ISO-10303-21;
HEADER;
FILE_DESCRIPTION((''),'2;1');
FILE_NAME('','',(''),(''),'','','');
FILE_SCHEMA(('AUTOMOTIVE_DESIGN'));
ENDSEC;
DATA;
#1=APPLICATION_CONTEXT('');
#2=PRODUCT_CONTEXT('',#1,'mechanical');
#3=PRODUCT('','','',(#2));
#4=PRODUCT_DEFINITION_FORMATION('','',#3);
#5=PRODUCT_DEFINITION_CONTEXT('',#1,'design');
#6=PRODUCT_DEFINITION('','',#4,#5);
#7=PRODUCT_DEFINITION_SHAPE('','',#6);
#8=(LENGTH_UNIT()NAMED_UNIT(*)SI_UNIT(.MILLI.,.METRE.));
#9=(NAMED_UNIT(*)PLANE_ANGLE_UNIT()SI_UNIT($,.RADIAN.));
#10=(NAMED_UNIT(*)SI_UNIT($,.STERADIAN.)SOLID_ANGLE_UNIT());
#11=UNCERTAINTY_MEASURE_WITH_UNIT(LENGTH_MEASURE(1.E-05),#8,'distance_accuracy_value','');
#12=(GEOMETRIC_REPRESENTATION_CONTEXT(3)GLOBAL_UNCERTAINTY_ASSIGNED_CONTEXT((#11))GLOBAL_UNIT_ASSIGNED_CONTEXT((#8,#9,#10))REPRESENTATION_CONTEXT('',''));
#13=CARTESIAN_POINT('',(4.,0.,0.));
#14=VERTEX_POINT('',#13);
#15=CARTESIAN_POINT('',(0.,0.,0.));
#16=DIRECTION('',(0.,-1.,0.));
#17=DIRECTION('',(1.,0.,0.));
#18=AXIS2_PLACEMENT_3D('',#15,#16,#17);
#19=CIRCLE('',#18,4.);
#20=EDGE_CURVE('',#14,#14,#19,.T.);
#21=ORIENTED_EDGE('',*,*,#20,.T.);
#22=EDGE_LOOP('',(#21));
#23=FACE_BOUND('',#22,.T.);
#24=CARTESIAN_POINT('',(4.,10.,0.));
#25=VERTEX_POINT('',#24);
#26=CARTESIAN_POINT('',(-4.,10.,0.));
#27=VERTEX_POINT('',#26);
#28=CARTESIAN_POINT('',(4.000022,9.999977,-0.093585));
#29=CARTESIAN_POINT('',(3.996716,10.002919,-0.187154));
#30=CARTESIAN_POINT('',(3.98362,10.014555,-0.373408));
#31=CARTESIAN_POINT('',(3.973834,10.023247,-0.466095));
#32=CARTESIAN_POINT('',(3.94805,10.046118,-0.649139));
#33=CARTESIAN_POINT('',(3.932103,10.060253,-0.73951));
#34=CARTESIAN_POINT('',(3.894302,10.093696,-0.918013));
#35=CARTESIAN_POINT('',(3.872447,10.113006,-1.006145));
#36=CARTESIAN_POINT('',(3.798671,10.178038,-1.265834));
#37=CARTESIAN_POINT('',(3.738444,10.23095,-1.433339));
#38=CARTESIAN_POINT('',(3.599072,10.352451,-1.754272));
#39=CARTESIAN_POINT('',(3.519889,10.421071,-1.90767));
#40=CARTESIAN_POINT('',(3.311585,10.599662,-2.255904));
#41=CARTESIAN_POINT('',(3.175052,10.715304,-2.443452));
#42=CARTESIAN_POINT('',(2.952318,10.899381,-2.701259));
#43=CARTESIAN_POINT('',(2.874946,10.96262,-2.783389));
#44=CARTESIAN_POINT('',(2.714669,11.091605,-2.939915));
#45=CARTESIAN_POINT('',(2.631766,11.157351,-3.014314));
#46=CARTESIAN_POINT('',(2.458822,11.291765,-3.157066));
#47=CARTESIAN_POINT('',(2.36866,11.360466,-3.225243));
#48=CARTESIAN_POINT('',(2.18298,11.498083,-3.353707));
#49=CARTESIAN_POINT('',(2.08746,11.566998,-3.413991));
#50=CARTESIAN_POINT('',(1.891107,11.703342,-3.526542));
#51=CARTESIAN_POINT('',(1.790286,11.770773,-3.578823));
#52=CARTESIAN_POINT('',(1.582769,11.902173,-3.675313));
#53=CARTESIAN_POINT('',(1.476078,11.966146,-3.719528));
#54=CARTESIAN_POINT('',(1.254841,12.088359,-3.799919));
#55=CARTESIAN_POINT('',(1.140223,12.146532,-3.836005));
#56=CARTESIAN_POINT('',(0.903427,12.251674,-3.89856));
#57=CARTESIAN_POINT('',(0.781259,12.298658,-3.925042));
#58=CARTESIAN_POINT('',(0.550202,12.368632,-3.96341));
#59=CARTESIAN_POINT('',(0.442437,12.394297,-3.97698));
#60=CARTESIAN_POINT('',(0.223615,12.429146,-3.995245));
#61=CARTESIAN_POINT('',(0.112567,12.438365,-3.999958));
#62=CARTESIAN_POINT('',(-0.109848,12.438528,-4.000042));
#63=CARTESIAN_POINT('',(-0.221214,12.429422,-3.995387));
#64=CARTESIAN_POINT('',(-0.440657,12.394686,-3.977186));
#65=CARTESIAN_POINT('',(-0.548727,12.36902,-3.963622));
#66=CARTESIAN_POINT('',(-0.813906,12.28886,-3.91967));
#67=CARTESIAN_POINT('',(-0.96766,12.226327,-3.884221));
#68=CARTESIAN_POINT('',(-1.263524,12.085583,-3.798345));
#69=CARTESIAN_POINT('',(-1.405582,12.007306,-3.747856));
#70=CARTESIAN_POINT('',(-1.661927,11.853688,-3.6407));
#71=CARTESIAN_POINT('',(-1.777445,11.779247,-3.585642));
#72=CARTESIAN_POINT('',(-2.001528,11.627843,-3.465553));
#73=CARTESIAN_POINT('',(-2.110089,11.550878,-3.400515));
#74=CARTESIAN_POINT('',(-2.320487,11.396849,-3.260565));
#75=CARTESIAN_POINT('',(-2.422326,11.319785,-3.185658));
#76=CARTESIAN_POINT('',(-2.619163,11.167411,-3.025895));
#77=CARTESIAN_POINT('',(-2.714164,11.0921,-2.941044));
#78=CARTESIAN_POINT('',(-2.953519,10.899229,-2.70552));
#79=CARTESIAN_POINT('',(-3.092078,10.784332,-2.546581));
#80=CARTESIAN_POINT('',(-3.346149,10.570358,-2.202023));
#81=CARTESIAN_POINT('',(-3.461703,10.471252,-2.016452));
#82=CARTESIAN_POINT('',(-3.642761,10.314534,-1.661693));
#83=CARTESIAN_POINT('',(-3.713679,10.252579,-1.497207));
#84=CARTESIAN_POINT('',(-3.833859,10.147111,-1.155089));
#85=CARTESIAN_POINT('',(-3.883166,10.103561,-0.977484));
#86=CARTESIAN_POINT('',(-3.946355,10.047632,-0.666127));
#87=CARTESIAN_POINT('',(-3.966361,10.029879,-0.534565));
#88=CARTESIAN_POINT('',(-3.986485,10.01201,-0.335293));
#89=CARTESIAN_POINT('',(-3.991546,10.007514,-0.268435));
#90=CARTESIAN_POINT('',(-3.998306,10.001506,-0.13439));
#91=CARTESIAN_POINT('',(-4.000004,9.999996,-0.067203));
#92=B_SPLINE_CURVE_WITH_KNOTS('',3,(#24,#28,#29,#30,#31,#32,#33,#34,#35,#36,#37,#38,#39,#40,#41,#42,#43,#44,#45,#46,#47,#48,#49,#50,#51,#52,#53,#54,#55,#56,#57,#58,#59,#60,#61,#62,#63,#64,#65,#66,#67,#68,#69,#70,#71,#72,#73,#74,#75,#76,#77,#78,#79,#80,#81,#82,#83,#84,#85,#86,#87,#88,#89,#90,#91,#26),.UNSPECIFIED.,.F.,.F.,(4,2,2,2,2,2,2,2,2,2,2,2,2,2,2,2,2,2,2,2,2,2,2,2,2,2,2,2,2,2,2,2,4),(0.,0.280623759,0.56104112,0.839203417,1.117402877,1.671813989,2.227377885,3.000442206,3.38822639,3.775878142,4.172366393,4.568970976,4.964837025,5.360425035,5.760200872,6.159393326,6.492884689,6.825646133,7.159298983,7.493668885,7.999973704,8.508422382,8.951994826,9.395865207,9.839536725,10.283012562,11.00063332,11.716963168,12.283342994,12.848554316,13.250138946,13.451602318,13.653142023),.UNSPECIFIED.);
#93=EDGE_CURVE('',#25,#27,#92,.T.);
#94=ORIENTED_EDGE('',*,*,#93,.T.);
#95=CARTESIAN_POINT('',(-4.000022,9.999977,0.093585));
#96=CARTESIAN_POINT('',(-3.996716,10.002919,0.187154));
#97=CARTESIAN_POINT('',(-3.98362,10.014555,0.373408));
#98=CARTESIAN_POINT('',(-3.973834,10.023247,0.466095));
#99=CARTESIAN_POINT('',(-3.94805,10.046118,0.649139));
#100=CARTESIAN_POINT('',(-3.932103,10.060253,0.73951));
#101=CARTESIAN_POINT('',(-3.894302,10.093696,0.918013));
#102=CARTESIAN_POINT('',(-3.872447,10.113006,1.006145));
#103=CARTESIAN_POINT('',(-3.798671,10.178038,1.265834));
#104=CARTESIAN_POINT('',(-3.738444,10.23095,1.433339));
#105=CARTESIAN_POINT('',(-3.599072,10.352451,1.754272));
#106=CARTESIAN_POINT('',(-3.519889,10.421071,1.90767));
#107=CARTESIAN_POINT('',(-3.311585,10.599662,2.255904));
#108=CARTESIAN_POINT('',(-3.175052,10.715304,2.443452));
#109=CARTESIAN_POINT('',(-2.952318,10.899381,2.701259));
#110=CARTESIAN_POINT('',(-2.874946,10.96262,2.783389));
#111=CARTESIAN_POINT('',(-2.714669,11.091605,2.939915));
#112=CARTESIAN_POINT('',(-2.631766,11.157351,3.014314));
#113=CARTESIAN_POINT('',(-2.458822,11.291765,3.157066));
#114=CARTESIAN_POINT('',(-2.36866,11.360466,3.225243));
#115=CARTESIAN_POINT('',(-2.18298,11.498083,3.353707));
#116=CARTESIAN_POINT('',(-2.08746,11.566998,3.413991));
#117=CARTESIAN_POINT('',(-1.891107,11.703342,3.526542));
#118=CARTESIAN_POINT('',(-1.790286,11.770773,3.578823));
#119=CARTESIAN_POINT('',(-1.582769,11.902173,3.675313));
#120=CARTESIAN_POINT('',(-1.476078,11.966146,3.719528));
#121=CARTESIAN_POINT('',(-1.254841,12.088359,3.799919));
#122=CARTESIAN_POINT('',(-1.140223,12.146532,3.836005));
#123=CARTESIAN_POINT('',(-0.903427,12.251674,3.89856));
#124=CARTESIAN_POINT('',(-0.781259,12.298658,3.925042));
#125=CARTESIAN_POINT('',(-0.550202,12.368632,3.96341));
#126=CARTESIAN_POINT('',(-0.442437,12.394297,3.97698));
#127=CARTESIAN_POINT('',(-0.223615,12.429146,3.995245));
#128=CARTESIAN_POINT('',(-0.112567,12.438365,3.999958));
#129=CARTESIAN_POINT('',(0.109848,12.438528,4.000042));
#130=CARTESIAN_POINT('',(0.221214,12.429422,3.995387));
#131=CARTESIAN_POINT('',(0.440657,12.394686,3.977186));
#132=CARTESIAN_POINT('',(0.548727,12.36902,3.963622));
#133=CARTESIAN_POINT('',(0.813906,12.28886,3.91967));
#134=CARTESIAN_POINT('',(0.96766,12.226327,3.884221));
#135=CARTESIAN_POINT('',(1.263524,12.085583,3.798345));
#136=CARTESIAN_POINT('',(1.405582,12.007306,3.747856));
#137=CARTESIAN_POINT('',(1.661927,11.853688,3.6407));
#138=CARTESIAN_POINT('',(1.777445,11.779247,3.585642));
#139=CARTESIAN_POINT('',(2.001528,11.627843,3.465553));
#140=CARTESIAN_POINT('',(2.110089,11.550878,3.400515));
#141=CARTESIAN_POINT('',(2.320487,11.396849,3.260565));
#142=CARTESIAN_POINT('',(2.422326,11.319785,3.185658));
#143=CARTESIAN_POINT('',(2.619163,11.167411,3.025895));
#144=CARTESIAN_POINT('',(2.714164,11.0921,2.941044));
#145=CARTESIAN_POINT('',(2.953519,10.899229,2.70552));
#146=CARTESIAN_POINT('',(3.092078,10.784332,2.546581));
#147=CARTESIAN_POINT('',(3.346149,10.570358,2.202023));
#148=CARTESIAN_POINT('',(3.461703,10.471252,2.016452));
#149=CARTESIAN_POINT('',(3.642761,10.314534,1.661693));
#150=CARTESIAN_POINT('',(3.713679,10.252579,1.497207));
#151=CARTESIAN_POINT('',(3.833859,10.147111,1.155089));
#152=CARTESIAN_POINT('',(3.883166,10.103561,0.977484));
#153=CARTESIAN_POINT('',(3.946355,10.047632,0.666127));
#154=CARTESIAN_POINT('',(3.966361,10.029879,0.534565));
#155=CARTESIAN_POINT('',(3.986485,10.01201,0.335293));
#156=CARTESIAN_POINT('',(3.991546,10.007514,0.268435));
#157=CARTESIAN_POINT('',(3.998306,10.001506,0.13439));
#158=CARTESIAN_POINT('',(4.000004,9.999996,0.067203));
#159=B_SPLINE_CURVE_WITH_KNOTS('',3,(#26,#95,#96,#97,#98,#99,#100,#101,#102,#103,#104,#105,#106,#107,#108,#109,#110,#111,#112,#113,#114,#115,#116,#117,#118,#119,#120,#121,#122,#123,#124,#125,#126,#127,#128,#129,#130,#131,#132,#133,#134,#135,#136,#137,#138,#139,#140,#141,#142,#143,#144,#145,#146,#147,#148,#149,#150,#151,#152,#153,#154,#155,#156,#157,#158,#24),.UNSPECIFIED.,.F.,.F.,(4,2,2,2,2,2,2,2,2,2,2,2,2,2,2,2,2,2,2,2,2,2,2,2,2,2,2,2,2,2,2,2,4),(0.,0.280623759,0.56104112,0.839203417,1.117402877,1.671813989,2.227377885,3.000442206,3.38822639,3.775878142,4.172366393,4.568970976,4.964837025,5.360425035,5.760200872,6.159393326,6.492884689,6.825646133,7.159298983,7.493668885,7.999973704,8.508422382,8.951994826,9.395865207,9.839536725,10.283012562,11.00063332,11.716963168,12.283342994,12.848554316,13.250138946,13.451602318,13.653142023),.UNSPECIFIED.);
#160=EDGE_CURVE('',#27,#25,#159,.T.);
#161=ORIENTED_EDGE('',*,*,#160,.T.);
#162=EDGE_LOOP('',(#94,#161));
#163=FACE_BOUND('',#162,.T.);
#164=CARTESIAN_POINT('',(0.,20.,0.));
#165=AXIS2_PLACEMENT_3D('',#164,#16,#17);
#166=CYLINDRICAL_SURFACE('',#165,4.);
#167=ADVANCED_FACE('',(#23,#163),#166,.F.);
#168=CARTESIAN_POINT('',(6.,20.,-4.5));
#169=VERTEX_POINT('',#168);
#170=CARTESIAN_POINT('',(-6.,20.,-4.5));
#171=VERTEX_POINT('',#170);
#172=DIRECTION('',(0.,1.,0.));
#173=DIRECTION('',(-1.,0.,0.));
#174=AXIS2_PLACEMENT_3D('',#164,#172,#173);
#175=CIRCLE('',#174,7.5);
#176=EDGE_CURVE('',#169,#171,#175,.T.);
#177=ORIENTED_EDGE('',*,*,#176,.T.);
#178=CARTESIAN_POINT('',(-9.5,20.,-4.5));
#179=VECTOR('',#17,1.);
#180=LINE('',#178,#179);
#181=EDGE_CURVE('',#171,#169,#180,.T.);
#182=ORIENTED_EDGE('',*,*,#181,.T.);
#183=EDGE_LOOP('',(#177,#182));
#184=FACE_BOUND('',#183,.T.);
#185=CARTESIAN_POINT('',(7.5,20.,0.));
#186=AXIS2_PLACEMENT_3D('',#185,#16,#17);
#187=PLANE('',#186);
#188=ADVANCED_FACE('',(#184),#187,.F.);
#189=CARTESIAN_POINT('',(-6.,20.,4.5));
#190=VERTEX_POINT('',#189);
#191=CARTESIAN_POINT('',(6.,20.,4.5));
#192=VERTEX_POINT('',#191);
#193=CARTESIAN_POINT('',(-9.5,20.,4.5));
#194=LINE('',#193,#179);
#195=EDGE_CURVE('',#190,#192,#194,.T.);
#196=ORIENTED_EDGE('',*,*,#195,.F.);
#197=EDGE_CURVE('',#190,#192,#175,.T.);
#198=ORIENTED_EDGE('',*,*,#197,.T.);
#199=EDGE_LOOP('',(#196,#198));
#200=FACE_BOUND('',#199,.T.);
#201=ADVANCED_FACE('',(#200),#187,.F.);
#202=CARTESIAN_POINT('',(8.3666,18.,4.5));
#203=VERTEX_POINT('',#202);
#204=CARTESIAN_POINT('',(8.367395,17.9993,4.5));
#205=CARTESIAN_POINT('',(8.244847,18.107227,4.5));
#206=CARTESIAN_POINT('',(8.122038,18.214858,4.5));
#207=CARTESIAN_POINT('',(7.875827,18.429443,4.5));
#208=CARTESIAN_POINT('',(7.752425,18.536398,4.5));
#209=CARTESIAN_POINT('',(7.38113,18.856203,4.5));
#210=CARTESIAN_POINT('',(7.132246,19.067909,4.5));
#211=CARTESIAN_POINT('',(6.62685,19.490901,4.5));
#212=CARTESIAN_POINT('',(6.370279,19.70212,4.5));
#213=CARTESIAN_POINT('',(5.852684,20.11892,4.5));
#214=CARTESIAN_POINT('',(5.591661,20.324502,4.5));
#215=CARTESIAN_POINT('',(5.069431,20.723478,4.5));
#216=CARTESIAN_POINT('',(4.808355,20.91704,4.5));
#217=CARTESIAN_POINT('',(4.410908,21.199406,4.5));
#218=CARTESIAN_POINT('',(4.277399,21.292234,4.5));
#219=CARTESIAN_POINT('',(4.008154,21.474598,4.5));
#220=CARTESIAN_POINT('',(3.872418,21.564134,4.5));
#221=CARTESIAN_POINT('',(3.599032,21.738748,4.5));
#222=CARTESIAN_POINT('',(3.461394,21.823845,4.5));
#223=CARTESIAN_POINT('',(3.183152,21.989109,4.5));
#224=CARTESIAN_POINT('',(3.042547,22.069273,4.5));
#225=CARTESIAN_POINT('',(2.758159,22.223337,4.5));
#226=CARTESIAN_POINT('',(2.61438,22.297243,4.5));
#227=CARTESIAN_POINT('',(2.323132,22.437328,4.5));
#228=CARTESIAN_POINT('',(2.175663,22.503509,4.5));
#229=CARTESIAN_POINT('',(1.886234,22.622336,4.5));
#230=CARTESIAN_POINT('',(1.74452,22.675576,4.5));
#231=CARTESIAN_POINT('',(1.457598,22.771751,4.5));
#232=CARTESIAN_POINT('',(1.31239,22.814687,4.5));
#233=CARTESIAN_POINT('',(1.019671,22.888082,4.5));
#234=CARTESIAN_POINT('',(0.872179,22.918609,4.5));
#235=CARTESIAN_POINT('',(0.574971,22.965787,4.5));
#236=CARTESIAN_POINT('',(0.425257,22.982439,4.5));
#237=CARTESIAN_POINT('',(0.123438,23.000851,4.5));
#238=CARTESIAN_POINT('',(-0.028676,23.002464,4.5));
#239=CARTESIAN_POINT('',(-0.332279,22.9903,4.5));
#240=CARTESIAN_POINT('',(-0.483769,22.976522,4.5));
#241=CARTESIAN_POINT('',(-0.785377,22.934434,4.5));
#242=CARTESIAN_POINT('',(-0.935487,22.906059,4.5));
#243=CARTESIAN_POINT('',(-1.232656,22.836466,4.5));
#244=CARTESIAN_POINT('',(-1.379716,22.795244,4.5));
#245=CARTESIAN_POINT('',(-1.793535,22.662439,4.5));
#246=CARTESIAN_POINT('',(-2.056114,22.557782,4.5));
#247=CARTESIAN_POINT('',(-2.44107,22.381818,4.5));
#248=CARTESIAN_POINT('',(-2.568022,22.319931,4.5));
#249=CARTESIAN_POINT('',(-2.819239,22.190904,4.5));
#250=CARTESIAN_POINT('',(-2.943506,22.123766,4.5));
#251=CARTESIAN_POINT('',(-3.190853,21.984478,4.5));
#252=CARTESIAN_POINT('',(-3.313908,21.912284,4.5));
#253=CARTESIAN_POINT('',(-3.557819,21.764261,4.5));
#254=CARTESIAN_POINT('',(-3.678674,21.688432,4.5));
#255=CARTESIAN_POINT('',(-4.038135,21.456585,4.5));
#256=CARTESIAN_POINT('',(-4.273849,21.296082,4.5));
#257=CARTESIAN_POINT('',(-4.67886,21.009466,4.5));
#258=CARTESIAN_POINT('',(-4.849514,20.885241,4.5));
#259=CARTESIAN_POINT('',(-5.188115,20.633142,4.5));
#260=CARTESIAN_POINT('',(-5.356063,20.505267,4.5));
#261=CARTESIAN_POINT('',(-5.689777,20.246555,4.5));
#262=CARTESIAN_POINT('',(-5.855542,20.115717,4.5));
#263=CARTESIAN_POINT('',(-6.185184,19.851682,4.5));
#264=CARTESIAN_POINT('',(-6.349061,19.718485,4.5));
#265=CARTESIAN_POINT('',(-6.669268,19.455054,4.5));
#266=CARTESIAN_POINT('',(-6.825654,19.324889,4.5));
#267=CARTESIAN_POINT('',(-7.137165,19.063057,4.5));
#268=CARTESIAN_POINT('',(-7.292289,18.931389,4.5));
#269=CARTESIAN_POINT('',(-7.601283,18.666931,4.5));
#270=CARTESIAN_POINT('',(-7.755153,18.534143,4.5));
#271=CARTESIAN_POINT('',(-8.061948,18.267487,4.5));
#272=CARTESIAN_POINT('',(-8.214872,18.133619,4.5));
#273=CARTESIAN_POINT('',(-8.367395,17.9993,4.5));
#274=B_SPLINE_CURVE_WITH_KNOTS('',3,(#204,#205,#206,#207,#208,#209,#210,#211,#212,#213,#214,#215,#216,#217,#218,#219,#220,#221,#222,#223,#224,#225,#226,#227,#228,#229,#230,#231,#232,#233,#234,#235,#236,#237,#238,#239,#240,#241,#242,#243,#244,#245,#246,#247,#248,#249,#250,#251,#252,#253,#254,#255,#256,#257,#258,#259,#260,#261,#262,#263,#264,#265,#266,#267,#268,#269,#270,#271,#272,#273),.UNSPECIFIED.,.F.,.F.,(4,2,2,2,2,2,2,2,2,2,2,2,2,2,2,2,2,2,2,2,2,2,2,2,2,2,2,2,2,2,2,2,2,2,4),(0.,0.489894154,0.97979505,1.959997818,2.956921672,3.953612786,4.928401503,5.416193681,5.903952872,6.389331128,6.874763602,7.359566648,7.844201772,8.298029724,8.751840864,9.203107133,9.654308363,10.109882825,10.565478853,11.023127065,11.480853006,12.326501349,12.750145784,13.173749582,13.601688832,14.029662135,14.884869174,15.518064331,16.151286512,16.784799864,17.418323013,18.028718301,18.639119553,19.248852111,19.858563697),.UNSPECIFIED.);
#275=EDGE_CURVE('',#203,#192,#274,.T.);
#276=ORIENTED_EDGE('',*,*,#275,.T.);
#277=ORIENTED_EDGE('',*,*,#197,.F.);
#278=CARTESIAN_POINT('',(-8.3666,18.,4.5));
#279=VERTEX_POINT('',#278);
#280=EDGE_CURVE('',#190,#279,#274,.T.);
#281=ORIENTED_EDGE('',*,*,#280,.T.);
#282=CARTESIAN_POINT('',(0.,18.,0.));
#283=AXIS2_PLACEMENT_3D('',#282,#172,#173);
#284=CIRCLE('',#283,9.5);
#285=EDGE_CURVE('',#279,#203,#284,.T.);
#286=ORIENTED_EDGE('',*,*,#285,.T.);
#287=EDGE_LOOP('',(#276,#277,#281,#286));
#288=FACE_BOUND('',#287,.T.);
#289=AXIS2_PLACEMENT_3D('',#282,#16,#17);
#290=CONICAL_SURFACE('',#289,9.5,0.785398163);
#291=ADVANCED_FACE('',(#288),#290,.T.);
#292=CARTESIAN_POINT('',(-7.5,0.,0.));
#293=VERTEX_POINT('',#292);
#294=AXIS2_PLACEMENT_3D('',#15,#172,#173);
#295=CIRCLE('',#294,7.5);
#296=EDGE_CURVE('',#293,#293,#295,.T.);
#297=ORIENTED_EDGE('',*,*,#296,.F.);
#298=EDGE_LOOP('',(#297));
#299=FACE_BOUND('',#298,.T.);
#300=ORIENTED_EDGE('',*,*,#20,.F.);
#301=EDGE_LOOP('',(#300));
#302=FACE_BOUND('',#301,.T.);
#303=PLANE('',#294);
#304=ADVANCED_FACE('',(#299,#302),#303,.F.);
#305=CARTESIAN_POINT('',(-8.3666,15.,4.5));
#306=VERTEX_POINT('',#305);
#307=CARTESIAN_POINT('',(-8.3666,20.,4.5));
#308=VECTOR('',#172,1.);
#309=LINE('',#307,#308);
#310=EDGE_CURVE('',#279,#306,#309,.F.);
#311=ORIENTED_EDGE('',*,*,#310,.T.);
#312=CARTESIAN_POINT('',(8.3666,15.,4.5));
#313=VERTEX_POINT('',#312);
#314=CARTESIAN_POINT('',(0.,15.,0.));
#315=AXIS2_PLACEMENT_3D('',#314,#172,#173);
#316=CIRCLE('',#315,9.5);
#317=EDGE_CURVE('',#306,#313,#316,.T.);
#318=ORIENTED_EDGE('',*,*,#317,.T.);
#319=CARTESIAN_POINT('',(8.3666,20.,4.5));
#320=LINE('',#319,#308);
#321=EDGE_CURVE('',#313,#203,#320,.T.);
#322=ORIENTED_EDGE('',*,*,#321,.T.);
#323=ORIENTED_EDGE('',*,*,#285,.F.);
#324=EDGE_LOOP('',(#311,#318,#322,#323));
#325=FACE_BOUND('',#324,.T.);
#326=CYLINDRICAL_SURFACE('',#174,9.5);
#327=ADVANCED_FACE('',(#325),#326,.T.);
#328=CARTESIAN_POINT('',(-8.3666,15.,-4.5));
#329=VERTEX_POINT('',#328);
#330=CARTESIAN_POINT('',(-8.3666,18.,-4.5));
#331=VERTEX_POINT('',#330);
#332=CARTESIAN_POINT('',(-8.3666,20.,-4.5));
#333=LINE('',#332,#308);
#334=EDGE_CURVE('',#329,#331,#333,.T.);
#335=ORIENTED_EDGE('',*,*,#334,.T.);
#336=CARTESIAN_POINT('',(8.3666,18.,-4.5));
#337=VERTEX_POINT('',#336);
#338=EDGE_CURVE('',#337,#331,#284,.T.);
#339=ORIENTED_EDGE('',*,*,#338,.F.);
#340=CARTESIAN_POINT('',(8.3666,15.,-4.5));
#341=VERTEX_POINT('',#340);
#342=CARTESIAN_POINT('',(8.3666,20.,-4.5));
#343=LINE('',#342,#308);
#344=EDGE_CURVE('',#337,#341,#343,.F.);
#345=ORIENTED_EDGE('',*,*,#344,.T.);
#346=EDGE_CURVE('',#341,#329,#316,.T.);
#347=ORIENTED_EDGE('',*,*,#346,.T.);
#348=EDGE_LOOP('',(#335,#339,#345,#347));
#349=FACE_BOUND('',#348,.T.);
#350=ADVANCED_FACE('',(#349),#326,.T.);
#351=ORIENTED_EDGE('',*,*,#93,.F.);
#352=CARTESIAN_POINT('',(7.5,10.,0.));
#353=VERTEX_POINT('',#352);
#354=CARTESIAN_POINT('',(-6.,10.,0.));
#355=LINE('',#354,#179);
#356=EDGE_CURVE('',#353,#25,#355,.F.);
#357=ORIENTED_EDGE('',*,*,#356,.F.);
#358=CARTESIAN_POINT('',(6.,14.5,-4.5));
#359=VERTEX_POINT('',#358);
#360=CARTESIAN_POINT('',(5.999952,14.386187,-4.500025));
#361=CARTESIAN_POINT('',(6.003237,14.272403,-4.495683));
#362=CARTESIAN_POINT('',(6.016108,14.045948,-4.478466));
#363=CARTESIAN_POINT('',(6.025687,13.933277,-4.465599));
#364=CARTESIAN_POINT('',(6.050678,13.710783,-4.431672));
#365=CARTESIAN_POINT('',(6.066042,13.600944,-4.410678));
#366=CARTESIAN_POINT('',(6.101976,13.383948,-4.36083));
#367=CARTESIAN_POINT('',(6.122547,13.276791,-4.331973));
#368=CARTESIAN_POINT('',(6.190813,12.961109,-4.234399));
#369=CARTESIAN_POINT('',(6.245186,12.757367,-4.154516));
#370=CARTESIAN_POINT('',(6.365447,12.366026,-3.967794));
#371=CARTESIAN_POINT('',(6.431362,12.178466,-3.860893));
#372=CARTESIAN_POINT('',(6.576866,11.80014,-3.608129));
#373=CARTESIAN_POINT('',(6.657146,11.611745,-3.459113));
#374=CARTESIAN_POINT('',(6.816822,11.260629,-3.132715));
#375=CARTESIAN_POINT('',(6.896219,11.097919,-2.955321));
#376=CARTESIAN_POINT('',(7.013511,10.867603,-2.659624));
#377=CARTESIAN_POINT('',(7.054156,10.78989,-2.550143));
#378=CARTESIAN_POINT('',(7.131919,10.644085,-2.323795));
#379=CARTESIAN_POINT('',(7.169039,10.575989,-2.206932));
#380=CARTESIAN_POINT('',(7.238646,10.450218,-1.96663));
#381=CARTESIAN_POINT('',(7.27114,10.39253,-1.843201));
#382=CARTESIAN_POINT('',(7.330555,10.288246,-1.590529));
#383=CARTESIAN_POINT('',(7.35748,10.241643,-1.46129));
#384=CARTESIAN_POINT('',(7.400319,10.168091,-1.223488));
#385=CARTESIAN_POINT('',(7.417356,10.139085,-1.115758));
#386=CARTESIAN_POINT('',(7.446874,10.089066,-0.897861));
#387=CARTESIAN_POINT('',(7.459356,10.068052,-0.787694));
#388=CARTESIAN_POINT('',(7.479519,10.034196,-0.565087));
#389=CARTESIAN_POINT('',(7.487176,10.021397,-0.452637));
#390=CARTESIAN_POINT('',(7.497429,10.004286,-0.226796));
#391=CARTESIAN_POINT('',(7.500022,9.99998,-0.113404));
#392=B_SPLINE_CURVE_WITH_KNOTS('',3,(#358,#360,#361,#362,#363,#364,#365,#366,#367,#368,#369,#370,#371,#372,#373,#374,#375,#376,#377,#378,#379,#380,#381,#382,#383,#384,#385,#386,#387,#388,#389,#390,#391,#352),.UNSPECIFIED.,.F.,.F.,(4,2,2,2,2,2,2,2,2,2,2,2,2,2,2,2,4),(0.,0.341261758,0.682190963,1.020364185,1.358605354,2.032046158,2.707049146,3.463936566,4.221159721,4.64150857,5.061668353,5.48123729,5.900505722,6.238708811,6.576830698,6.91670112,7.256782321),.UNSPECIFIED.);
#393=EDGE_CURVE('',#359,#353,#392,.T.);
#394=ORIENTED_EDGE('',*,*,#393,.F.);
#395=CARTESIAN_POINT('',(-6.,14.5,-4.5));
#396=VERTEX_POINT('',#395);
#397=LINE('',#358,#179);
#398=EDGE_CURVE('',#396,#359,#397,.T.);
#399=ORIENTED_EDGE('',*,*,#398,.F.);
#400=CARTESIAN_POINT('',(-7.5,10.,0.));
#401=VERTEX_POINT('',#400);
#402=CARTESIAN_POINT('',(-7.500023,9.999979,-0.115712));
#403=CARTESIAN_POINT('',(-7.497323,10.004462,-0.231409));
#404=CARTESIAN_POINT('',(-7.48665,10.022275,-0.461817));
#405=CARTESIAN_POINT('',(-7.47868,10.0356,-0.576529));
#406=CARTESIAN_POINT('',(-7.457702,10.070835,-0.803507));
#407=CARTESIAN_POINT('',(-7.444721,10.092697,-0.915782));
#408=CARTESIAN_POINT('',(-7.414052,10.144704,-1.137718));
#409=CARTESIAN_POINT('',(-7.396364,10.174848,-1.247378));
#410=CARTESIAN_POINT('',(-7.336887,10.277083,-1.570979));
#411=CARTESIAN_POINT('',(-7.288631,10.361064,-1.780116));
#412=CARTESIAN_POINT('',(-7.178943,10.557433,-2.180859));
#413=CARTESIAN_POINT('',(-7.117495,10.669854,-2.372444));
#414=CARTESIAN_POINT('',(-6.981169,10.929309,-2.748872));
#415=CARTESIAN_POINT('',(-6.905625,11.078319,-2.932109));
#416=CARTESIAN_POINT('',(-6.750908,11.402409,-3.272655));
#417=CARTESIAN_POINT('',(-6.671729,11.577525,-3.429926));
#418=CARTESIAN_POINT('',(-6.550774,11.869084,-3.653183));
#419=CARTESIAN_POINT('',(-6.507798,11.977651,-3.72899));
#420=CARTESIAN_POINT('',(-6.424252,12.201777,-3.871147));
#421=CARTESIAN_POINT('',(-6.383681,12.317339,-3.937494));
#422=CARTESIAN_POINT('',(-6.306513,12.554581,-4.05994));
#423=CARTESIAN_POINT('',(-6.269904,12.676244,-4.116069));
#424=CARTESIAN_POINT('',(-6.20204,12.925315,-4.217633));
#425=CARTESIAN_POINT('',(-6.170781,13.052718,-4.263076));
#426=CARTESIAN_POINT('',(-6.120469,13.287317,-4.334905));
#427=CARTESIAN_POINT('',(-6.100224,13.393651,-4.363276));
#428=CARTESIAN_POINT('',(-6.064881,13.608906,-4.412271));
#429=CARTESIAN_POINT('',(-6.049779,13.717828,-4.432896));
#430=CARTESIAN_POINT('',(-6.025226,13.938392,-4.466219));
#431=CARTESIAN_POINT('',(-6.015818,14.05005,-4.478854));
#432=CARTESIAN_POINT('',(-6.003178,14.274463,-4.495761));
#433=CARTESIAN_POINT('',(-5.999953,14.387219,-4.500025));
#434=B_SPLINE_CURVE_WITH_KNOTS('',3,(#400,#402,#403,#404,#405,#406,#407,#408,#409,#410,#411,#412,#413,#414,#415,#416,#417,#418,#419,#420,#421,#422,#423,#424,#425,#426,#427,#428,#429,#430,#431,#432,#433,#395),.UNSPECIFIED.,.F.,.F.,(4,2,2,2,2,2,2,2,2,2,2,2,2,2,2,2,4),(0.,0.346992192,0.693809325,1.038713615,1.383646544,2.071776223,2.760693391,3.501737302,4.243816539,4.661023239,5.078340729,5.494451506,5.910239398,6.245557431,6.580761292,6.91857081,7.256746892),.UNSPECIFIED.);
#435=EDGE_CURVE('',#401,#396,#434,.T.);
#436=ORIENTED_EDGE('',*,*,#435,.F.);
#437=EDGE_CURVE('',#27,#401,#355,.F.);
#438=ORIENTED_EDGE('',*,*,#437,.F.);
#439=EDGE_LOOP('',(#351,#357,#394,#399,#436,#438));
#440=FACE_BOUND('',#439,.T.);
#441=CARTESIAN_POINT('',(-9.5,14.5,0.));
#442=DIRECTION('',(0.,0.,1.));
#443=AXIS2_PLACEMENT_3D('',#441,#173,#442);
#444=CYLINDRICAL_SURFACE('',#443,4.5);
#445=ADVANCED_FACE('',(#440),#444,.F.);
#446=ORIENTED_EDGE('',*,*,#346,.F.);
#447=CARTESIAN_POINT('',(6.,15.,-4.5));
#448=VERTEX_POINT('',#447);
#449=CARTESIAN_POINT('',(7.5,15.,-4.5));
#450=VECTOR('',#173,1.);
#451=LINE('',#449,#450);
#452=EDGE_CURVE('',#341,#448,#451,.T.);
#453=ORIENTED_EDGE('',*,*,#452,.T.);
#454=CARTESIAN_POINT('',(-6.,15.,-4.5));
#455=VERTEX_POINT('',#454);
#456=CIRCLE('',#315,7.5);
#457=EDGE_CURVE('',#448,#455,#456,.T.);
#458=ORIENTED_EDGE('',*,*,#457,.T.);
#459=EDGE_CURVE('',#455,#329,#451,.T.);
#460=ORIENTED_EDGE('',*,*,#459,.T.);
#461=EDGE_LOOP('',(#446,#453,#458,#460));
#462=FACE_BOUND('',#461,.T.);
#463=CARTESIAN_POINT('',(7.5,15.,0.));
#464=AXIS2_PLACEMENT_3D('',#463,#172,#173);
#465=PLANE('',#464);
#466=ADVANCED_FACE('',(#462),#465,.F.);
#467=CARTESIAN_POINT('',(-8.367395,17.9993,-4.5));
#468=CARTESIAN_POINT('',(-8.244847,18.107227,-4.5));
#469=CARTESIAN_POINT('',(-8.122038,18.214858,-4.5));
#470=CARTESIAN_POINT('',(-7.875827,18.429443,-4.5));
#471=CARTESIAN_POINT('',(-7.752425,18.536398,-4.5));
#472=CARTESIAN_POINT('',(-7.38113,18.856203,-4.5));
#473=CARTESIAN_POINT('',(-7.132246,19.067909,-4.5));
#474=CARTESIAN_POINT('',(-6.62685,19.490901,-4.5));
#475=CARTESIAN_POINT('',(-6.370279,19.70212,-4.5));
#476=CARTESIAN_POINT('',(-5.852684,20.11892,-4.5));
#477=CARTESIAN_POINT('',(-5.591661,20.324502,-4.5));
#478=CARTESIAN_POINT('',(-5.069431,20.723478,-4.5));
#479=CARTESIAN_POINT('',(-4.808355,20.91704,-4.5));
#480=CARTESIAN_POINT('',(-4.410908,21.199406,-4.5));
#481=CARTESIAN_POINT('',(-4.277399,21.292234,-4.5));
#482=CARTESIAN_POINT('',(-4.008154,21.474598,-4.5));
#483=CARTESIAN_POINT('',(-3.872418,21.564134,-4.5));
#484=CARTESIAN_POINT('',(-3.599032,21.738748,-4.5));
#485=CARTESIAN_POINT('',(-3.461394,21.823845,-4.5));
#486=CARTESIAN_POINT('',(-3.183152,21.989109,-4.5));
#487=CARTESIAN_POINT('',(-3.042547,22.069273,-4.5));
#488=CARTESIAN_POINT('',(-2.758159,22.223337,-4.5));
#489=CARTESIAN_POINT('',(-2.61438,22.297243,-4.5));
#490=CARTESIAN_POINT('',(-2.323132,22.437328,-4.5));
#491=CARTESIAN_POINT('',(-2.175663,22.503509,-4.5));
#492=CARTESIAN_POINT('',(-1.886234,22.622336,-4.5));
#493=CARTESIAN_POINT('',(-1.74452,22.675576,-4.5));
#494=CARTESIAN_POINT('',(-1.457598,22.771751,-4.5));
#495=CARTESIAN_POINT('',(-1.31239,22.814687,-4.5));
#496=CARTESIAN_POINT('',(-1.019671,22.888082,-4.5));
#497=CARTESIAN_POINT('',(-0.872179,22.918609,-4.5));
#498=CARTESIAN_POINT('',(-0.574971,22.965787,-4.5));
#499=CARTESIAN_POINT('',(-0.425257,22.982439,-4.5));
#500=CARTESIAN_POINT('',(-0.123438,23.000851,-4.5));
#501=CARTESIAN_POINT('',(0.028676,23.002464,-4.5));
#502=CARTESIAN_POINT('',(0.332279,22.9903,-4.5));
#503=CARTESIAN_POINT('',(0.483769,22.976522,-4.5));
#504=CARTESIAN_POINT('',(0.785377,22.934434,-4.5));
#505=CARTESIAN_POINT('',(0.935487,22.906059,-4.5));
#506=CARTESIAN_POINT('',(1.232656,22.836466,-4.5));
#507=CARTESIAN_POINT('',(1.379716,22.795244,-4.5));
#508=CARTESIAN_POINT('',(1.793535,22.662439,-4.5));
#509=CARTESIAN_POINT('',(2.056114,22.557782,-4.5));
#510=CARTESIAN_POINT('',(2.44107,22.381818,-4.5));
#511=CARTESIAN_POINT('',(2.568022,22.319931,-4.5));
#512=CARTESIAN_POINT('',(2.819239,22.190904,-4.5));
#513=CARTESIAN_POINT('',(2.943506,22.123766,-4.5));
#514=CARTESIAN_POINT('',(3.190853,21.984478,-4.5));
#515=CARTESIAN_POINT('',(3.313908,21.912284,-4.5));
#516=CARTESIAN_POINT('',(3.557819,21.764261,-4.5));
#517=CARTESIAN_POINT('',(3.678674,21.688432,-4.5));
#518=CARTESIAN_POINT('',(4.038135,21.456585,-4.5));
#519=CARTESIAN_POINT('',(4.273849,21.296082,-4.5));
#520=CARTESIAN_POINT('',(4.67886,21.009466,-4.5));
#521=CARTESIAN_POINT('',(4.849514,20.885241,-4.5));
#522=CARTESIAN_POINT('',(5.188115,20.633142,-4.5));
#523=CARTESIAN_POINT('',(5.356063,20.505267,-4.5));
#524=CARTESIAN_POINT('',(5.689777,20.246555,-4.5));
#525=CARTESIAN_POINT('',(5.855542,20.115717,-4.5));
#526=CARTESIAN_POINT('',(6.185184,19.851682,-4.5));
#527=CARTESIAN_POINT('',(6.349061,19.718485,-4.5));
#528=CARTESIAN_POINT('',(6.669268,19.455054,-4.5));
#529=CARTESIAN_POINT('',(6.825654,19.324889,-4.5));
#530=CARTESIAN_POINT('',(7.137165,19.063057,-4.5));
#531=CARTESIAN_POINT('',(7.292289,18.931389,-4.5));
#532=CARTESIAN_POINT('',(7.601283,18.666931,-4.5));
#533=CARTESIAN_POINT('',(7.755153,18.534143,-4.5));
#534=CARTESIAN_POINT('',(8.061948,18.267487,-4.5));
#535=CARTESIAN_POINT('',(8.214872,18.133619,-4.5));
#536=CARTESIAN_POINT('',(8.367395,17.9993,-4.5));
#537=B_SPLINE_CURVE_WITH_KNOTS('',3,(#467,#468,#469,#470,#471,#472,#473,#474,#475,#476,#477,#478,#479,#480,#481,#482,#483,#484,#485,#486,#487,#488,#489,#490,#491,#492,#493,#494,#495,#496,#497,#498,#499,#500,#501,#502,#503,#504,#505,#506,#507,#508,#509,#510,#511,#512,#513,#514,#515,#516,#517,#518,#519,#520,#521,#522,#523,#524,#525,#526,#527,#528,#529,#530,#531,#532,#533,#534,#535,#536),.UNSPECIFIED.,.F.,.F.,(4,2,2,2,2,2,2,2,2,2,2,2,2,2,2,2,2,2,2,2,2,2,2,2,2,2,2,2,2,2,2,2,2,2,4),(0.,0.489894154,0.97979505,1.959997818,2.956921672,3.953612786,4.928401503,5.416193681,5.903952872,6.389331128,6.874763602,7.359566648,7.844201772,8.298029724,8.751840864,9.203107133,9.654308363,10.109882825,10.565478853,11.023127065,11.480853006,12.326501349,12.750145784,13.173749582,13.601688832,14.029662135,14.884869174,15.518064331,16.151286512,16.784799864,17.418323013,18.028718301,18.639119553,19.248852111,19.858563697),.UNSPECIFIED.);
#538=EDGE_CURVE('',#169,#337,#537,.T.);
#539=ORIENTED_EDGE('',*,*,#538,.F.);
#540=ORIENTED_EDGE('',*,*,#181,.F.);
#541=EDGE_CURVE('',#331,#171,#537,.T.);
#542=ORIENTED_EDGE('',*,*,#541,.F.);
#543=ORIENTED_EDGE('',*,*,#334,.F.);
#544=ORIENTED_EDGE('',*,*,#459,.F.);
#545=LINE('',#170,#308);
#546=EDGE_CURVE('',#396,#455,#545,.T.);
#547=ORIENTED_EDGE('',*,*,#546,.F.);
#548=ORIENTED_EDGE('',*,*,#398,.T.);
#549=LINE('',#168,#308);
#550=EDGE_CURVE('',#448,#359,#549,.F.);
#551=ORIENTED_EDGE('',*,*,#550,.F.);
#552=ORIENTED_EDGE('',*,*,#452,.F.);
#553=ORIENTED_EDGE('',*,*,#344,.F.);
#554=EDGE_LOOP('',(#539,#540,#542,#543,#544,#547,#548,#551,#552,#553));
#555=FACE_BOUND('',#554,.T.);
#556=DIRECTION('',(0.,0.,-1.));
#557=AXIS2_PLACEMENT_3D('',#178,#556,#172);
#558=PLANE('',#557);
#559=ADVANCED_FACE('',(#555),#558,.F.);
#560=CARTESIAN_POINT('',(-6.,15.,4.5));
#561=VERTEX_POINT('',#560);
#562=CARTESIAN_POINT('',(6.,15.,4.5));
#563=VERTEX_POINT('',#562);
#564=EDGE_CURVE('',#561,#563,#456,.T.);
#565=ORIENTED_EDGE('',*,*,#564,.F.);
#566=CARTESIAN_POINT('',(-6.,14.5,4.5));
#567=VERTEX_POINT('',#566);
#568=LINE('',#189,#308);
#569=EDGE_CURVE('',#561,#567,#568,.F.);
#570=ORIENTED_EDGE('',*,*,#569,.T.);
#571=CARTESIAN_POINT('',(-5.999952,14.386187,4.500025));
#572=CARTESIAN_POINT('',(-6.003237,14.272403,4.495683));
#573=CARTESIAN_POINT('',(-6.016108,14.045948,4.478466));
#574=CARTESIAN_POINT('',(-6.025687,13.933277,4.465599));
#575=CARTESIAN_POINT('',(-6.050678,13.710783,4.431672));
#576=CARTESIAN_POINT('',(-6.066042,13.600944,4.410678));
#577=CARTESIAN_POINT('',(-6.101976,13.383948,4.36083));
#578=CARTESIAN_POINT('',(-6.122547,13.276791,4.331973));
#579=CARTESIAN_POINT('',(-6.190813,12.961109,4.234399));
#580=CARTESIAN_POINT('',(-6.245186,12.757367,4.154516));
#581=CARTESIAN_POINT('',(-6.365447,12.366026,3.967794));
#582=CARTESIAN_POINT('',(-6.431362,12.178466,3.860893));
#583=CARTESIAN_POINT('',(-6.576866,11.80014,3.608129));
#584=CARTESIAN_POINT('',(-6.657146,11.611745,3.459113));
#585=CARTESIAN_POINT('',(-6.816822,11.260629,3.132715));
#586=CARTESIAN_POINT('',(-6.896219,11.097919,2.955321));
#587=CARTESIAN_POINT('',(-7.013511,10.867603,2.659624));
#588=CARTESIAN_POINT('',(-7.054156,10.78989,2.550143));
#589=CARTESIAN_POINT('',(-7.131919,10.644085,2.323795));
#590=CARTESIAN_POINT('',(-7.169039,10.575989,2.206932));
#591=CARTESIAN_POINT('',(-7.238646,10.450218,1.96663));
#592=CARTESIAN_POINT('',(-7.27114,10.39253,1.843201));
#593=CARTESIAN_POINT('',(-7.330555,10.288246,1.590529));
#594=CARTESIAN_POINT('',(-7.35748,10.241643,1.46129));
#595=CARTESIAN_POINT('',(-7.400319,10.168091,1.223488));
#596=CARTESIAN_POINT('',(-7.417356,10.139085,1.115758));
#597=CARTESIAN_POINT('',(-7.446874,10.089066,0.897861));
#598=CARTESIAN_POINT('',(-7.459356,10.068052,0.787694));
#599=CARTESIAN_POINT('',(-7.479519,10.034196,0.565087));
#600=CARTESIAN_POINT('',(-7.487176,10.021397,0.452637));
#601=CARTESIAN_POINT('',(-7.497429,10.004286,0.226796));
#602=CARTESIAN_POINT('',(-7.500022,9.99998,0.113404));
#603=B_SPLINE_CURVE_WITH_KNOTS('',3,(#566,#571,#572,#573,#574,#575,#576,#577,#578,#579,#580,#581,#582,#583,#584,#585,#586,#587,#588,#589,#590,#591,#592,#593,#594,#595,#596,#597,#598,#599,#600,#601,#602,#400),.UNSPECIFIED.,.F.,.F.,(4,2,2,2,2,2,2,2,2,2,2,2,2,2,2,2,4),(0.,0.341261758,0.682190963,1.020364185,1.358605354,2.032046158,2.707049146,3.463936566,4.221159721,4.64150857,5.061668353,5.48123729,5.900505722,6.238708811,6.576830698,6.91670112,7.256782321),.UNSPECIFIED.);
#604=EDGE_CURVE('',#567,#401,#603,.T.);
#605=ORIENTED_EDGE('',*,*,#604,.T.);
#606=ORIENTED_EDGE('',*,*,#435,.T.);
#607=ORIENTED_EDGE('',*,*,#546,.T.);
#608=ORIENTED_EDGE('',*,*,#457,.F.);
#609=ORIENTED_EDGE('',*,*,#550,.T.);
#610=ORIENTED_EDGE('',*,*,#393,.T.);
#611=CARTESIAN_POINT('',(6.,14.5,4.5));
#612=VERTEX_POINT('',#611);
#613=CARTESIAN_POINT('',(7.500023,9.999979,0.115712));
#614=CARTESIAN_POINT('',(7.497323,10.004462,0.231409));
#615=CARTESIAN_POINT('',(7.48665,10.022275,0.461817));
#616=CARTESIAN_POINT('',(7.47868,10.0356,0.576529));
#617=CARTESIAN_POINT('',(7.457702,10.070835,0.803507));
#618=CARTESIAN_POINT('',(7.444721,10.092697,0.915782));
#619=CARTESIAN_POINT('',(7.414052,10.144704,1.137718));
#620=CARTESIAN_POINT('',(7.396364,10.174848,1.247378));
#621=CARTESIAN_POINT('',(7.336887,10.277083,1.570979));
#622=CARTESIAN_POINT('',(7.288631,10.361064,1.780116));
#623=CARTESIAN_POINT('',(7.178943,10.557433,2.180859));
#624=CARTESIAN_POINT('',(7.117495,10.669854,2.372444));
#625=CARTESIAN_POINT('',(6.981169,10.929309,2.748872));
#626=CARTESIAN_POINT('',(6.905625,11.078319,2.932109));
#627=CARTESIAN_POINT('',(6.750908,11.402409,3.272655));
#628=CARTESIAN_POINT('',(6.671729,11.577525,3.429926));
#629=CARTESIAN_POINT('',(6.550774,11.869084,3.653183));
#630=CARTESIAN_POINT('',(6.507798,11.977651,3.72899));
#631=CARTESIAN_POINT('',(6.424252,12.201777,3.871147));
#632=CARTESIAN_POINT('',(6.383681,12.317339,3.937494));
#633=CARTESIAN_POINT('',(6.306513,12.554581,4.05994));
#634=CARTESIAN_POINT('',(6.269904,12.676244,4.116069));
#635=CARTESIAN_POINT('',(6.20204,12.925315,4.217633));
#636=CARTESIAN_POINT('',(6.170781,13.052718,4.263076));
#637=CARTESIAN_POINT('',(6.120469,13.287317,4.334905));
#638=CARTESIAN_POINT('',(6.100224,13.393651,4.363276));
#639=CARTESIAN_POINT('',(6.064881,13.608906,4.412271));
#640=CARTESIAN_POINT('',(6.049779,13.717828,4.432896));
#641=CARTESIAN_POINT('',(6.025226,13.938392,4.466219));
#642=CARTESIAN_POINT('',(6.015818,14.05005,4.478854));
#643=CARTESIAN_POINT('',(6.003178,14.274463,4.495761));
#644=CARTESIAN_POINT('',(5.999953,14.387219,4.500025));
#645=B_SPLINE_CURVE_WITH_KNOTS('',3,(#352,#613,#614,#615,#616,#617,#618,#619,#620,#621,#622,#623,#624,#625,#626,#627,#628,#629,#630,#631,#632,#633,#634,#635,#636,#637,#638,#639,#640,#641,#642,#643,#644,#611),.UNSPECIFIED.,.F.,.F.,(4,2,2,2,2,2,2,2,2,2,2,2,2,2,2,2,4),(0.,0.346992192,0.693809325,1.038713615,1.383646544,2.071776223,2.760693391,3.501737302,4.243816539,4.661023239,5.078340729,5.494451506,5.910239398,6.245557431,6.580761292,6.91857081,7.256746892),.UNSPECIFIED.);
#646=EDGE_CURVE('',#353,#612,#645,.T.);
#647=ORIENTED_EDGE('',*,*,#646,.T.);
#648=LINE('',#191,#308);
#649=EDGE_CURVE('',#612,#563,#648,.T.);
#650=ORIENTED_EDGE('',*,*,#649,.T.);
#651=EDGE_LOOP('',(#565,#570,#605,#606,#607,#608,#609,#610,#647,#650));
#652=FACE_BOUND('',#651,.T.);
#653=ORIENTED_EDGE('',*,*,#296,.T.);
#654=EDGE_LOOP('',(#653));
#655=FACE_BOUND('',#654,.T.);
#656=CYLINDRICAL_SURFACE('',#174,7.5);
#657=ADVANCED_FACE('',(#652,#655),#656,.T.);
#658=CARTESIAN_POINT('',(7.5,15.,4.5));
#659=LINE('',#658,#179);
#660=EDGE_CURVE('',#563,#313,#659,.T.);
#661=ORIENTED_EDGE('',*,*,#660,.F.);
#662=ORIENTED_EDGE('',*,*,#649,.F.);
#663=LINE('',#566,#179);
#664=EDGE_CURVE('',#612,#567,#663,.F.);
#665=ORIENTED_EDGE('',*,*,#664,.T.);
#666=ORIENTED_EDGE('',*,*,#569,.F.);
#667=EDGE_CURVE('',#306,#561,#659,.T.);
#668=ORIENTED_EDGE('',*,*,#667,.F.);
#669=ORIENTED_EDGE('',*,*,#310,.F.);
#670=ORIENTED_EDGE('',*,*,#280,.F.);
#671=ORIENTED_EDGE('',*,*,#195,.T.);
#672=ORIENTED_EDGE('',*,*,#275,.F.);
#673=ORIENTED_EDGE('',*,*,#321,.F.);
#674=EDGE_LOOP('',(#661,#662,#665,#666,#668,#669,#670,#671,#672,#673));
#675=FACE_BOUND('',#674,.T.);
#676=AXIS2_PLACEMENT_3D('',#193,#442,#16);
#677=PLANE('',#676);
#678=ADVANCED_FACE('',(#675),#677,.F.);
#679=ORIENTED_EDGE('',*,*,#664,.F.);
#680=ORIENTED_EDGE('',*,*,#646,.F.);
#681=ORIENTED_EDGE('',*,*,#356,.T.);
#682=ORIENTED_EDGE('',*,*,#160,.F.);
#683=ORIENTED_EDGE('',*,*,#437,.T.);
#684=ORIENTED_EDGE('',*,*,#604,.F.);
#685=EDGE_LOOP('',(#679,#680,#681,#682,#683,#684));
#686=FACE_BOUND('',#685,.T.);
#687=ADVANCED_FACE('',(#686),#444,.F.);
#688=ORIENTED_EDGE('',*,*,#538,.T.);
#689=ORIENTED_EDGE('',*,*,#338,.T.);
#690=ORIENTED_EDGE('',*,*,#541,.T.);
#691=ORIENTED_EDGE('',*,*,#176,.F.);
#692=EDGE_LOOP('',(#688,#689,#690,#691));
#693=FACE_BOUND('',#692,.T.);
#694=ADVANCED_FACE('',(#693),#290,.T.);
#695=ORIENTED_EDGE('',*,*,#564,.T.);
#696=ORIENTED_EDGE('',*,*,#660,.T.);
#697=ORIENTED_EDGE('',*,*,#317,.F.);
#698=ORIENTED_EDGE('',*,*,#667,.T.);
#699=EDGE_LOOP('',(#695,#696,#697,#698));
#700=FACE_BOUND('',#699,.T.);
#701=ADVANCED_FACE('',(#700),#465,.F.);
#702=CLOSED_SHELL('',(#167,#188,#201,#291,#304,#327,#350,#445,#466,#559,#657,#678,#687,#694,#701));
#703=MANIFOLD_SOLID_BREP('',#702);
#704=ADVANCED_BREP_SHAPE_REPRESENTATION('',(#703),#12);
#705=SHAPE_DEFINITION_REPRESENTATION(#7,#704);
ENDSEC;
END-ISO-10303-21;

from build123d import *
from build123d.topology import SkipClean

# Parameters (mm, degrees)
SKETCH2_R               = 4
CUT_EXTRUDE1_DEPTH      = 25.093567606
CUT_EXTRUDE2_DEPTH      = 25.093567606
CUT_EXTRUDE2_DEPTH_BACK = 25.093567606
SKETCH3_W               = 9
SKETCH3_H               = 10
FILLET1_START           = 10
FILLET1_OUTLINE_R       = 4
FILLET1_DEPTH           = 4.5000001
FILLET1_START_2         = -7.500000249
FILLET1_2_DEPTH         = 15.000000249


with BuildPart() as part:
    # Sketch1 → Revolve1 (revolve)
    with BuildSketch(Plane.XY, mode=Mode.PRIVATE) as revolve1_sk:
        Polygon((0, 0), (7.5, 0), (7.5, 15), (9.5, 15), (9.5, 18), (7.5, 20), (0, 20), align=None)
    revolve(revolve1_sk.sketch.rotate(Axis((0, 20, 0), (0, -1, 0)), 180), axis=Axis((0, 20, 0), (0, -1, 0)))

    # Sketch2 → Cut-Extrude1 (cut, through all)
    with BuildSketch(Plane.XZ):
        Circle(SKETCH2_R)
    extrude(amount=-CUT_EXTRUDE1_DEPTH, mode=Mode.SUBTRACT)

    # Sketch3 → Cut-Extrude2 (cut, two sides: drawn at the far end of the back side and taken through both)
    with BuildSketch(Plane(origin=(0, 0, 0), x_dir=(0, 0, -1), z_dir=(1, 0, 0)).offset(-CUT_EXTRUDE2_DEPTH_BACK)):
        with Locations((0, 15)):
            Rectangle(SKETCH3_W, SKETCH3_H)
    extrude(amount=CUT_EXTRUDE2_DEPTH + CUT_EXTRUDE2_DEPTH_BACK, mode=Mode.SUBTRACT)

    # Fillet1: read off the stored shape, not the designer's step
    # Fillet1 outline → Fillet1 (add)
    with SkipClean():  # the faces are left unmerged after this step: merging them gives an invalid solid
        with BuildSketch(Plane(origin=(0, 0, 0), x_dir=(1, 0, 0), z_dir=(0, 1, 0)).offset(FILLET1_START)):
            with BuildLine():
                ThreePointArc((6, -4.5), (7.5, 0), (6, 4.5))
                Line((6, 4.5), (-6, 4.5))
                ThreePointArc((-6, 4.5), (-7.5, 0), (-6, -4.5))
                Line((-6, -4.5), (6, -4.5))
            make_face()
            Circle(FILLET1_OUTLINE_R, mode=Mode.SUBTRACT)
        extrude(amount=FILLET1_DEPTH)

    # Fillet1 2 outline → Fillet1 2 (cut)
    with SkipClean():  # the faces are left unmerged after this step: merging them gives an invalid solid
        with BuildSketch(Plane.YZ.offset(FILLET1_START_2)):
            with BuildLine():
                ThreePointArc((10, 0), (11.318019485, -3.181980515), (14.5, -4.5))
                Line((14.5, -4.5), (14.5, 4.5))
                ThreePointArc((14.5, 4.5), (11.318019485, 3.181980515), (10, 0))
            make_face()
        extrude(amount=FILLET1_2_DEPTH, mode=Mode.SUBTRACT)


solid = part.part
